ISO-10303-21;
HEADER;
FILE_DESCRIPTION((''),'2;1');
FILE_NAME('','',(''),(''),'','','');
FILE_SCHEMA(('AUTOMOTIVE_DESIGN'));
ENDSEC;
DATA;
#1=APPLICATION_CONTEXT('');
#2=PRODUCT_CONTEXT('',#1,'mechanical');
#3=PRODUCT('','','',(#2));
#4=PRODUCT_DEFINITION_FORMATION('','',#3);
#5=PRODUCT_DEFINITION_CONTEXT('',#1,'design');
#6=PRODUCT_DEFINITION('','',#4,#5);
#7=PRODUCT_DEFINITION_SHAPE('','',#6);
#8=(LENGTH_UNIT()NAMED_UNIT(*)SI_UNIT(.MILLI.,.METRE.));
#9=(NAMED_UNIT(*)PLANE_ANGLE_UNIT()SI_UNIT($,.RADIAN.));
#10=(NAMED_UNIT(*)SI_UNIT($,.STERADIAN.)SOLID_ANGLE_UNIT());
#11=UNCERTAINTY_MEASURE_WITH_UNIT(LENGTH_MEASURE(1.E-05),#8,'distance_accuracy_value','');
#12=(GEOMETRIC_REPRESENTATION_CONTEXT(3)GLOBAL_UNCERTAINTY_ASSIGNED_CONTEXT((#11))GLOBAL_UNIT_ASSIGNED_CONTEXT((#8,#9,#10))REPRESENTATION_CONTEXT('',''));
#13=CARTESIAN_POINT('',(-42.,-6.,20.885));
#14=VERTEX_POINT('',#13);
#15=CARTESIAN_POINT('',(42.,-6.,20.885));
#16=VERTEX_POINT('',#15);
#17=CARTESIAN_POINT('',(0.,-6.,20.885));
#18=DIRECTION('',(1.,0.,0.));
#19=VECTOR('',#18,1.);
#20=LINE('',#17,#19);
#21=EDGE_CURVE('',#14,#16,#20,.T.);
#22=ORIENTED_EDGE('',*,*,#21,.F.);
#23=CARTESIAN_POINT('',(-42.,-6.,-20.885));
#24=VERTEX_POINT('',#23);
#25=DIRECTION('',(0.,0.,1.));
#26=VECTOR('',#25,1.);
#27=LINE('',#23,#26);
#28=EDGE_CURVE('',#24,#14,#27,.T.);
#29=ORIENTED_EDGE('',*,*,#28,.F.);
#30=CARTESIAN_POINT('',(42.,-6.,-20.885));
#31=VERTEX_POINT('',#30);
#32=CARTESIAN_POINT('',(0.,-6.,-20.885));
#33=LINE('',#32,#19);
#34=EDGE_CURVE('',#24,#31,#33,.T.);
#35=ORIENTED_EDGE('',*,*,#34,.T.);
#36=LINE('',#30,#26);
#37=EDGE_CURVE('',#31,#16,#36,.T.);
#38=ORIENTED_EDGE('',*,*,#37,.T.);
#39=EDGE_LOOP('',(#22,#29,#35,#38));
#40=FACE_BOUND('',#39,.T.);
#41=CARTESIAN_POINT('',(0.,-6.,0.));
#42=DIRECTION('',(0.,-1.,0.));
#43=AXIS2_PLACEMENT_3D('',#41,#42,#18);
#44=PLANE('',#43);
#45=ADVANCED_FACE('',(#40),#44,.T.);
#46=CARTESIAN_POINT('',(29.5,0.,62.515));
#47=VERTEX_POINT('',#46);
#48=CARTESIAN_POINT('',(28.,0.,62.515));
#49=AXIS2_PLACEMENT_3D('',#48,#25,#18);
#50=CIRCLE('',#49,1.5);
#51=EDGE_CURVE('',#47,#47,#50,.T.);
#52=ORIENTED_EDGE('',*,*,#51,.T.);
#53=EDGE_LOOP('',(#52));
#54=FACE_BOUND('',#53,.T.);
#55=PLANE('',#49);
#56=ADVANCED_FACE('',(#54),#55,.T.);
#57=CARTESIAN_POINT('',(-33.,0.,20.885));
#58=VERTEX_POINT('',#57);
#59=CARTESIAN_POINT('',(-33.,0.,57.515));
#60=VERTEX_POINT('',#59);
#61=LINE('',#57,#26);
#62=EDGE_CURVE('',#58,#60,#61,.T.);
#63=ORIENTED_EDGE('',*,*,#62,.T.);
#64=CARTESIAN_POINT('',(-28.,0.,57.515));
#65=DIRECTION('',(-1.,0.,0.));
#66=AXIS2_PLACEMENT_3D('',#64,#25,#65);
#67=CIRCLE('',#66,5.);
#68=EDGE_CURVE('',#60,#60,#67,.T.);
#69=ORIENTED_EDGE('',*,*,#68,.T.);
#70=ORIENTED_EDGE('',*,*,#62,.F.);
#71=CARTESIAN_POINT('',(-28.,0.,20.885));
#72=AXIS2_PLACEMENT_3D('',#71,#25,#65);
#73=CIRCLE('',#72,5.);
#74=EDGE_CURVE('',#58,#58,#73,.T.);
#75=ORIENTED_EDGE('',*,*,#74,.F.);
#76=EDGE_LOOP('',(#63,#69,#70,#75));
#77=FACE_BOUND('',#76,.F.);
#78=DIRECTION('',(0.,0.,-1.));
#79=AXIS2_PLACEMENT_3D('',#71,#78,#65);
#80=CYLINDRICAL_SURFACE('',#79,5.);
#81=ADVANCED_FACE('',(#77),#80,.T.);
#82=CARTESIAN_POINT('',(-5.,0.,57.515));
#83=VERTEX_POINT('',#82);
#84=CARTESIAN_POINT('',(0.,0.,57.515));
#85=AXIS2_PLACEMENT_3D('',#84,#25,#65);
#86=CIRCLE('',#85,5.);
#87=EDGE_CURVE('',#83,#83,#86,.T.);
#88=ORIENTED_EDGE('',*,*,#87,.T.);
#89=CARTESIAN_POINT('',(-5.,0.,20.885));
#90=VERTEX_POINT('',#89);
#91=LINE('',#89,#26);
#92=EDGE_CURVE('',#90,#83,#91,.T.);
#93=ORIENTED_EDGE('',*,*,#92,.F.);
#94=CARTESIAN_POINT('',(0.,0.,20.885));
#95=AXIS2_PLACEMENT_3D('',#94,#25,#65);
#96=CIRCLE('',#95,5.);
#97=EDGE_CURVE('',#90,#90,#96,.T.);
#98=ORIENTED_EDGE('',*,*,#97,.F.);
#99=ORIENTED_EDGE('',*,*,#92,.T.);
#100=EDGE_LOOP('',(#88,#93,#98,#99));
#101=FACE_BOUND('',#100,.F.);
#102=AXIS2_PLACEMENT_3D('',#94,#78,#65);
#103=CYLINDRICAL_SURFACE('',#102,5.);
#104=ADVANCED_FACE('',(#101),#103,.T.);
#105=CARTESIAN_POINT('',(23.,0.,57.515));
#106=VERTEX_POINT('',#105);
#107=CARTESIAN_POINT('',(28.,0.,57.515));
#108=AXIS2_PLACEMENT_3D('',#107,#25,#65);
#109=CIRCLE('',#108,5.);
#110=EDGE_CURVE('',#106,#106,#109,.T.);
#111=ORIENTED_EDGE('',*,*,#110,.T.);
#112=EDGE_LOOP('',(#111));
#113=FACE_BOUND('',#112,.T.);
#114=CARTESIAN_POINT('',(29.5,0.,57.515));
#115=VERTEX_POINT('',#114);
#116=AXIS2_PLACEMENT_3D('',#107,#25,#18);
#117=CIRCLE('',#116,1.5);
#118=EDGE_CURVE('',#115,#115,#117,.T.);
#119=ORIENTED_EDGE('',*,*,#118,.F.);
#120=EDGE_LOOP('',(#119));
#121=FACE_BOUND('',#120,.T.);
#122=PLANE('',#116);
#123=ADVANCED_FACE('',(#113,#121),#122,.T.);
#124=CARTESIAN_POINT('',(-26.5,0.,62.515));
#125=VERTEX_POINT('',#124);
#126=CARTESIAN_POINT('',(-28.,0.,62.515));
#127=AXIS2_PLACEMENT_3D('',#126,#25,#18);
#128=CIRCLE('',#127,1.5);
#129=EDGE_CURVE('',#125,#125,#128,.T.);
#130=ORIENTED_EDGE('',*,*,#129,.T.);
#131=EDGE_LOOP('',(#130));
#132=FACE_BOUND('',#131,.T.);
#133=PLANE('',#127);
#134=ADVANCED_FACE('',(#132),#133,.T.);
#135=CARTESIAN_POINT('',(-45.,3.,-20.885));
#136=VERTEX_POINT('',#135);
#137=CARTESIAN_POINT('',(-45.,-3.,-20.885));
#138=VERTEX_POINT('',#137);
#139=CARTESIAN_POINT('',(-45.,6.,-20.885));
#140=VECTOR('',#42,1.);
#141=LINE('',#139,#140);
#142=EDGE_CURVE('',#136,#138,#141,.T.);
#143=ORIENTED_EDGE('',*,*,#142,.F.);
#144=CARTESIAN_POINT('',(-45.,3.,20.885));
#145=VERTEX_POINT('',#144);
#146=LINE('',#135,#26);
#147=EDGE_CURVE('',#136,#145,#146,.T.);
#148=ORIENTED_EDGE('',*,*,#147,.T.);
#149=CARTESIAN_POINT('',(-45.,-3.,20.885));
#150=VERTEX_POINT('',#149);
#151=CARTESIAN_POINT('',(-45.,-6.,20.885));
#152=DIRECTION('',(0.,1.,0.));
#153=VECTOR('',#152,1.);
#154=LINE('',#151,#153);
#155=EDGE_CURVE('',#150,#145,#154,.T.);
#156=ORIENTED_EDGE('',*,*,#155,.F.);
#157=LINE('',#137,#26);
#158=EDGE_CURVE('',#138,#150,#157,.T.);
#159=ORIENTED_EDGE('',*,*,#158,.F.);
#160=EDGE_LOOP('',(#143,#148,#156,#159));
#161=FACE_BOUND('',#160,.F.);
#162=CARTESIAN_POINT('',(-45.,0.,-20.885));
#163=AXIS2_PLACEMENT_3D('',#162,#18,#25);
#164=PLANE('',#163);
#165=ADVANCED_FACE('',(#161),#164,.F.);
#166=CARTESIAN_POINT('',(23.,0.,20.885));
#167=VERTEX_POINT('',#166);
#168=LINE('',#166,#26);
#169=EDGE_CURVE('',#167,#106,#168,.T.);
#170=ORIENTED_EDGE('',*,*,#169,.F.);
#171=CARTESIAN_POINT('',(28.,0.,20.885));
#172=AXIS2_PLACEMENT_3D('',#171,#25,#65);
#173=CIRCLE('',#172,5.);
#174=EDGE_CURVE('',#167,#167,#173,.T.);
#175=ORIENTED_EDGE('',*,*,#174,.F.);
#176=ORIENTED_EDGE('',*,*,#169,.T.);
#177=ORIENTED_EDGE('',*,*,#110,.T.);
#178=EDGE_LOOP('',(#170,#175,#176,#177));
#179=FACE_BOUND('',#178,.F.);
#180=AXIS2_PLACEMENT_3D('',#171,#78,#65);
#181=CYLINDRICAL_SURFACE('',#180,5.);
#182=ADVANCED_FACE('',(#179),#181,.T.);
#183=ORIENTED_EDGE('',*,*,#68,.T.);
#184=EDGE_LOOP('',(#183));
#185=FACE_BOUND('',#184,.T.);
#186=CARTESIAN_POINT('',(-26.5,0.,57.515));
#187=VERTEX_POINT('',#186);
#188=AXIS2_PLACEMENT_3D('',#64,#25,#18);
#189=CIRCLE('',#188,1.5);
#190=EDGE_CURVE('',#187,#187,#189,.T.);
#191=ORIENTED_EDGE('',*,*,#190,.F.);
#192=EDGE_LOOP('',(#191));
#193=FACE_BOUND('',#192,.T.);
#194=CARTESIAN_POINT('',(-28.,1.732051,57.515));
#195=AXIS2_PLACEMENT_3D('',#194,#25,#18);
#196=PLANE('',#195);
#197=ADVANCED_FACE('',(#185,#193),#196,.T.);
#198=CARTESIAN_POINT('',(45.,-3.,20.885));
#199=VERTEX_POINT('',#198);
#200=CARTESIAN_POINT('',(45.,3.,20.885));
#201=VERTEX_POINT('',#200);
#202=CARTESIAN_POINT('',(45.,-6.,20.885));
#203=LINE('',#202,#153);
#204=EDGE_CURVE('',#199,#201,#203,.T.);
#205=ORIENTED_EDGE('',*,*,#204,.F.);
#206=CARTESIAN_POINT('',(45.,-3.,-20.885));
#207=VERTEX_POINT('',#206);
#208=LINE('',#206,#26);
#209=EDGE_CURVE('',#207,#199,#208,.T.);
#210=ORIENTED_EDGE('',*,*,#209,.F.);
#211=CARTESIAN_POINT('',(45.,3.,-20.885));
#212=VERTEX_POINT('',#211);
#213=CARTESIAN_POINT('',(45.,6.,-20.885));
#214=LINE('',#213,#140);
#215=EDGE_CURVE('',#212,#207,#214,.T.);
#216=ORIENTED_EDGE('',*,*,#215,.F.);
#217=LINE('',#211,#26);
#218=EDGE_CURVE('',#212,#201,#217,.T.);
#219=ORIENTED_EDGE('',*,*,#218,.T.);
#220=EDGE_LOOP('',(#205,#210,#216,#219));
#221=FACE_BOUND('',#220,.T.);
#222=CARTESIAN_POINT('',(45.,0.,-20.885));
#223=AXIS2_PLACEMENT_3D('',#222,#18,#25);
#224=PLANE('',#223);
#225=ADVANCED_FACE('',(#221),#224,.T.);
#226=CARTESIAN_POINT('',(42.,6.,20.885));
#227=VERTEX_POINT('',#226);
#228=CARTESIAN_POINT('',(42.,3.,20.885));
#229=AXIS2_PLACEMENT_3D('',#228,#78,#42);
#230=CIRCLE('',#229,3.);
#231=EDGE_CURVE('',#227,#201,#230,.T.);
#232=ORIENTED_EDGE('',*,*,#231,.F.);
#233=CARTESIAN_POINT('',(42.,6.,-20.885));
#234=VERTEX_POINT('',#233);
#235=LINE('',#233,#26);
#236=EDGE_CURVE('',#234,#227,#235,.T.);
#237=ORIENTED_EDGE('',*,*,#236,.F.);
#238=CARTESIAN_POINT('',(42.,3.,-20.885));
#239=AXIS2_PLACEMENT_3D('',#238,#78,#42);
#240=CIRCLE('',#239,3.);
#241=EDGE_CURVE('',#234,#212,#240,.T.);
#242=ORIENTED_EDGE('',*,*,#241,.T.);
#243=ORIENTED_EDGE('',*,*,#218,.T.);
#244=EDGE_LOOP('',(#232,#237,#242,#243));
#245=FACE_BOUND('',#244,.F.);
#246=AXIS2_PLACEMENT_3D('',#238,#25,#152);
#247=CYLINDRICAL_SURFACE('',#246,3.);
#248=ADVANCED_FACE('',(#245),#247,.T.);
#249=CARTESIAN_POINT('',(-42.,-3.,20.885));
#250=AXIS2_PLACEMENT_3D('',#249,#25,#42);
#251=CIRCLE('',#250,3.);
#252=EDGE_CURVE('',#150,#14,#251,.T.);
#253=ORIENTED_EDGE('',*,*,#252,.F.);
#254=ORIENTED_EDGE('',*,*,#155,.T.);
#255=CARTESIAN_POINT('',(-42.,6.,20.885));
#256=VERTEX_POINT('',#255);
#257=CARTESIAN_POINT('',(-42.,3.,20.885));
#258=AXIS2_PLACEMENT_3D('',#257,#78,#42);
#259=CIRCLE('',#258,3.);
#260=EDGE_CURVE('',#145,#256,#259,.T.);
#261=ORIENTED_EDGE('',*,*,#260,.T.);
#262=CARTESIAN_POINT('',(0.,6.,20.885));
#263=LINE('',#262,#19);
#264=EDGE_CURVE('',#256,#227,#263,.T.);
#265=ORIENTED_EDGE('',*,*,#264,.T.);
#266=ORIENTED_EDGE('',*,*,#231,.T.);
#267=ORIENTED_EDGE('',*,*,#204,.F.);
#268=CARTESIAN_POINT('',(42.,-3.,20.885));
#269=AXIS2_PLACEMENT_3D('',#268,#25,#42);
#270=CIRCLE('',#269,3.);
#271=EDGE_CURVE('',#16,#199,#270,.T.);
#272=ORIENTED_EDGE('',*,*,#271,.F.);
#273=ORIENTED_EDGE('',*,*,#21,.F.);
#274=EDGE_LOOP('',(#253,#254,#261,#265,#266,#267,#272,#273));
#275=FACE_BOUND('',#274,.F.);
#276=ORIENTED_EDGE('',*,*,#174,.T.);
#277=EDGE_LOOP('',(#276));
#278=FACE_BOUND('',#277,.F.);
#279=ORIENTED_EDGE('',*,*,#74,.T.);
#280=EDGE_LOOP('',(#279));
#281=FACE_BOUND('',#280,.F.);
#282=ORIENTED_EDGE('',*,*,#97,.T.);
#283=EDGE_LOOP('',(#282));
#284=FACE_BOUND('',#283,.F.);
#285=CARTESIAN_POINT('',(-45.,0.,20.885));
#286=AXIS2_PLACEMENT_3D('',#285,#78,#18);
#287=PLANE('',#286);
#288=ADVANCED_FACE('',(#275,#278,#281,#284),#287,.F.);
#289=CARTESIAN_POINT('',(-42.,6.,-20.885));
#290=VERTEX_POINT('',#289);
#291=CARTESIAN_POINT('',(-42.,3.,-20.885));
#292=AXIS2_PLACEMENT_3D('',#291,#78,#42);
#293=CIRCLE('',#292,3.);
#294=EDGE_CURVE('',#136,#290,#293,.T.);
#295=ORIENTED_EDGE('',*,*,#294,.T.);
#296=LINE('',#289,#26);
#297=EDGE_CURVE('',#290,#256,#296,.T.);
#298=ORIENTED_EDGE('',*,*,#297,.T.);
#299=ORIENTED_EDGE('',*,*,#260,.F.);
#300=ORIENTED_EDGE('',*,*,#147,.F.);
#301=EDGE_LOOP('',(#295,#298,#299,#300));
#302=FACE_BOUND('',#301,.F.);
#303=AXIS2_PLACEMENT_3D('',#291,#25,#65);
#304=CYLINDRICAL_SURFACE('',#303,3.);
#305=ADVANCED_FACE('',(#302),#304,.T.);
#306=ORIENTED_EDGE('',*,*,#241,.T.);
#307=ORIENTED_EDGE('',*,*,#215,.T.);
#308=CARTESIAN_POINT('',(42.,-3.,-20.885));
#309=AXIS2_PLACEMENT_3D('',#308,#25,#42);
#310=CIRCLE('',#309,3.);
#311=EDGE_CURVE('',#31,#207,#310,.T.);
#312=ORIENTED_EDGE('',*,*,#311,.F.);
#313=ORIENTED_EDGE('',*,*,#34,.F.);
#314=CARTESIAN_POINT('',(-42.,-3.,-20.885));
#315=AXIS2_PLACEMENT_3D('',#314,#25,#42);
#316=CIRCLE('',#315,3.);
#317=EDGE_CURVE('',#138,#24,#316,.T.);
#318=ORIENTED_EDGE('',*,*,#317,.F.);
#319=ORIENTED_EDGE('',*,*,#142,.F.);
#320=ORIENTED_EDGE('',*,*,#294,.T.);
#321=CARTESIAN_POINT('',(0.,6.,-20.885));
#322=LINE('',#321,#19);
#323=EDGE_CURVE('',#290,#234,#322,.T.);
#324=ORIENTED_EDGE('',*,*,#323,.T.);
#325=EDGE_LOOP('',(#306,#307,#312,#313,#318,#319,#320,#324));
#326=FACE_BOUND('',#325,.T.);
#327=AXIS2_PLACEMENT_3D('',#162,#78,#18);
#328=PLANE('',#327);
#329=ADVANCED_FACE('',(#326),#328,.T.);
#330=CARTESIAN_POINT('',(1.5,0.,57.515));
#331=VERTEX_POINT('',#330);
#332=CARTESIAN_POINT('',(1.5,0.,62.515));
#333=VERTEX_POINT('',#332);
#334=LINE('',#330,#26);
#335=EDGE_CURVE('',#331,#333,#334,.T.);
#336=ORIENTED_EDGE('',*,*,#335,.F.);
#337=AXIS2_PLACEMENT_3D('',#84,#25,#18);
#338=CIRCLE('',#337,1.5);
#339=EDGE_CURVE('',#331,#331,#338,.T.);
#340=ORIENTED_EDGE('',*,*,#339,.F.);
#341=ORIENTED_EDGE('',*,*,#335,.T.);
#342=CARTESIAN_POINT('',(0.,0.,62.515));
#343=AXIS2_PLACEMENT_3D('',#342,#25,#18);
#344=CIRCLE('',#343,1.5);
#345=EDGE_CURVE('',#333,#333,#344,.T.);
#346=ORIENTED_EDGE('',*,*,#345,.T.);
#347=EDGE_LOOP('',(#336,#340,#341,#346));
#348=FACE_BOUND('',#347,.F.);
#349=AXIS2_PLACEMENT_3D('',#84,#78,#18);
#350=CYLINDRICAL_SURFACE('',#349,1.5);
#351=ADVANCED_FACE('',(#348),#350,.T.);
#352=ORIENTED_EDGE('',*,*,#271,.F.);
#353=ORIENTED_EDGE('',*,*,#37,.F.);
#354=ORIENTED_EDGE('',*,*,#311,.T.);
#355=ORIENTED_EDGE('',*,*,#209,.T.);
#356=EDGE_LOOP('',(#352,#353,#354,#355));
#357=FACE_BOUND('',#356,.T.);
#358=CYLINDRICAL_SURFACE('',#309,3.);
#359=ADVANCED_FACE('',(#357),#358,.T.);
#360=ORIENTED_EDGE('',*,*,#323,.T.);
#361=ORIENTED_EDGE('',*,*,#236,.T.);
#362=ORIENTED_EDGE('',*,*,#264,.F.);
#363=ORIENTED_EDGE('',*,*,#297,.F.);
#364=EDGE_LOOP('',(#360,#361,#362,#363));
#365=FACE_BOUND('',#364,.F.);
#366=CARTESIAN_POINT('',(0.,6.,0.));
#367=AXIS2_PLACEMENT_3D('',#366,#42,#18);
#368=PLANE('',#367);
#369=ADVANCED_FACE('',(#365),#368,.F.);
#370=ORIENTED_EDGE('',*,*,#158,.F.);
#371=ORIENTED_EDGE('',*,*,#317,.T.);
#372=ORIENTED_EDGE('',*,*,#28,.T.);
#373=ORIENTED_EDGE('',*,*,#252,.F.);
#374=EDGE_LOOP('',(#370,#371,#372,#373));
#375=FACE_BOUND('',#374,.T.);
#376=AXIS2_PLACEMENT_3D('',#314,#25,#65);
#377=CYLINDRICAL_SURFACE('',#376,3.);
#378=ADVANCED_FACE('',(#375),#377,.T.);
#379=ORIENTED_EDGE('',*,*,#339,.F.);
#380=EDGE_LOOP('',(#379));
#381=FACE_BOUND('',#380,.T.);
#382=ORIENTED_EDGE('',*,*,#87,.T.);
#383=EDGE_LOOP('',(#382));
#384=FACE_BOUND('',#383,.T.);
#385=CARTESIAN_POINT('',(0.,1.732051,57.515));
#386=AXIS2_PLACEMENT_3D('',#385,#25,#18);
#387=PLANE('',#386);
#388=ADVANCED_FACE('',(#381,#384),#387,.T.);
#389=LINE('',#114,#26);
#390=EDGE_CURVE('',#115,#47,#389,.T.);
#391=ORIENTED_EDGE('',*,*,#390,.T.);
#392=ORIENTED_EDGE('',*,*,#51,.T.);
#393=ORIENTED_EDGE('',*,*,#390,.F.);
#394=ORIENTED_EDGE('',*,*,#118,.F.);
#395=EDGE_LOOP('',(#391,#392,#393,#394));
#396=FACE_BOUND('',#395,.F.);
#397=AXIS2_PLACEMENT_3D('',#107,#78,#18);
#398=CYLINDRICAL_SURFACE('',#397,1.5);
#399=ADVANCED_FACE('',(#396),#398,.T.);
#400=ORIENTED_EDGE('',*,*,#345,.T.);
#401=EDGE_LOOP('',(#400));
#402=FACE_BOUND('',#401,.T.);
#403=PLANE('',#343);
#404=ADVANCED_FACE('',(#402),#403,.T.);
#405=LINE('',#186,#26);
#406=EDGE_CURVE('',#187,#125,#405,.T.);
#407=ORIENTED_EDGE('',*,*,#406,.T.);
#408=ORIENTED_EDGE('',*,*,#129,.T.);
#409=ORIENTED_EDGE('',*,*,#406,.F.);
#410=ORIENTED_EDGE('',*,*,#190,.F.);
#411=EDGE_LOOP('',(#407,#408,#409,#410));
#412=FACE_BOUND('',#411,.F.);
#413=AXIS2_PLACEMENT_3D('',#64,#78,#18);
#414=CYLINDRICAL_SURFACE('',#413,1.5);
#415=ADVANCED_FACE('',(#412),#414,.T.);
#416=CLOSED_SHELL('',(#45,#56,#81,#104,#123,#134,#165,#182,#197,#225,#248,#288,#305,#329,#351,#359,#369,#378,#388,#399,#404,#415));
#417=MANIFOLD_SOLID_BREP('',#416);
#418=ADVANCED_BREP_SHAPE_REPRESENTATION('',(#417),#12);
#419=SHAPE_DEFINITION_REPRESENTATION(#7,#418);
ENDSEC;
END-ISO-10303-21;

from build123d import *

# Parameters (mm, degrees)
F0_W     = 90
F0_H     = 41.77
F1_DEPTH = 6
F3_DEPTH = 36.63
F4_R     = 3
F5_R     = 1.5
F6_DEPTH = 5


with BuildPart() as f1:
    # F0 (on Front) → F1 (new body, symmetric)
    with BuildSketch(Plane.XZ):
        Rectangle(F0_W, F0_H)
    extrude(amount=F1_DEPTH, both=True)

    # F2 (on face) → F3 (join)
    with BuildSketch(Plane.XY.offset(20.885)):
        with BuildLine():
            Line((-28, 0), (-23, 0))
            ThreePointArc((-23, 0), (-28, 5), (-33, 0))
            Line((-33, 0), (-28, 0))
        make_face()
        with BuildLine():
            ThreePointArc((-33, 0), (-28, -5), (-23, 0))
            Line((-23, 0), (-28, 0))
            Line((-28, 0), (-33, 0))
        make_face()
        with BuildLine():
            Line((-5, 0), (0, 0))
            Line((0, 0), (5, 0))
            ThreePointArc((5, 0), (0, 5), (-5, 0))
        make_face()
        with BuildLine():
            Line((5, 0), (0, 0))
            Line((0, 0), (-5, 0))
            ThreePointArc((-5, 0), (0, -5), (5, 0))
        make_face()
        with BuildLine():
            ThreePointArc((33, 0), (28, 5), (23, 0))
            ThreePointArc((23, 0), (28, -5), (33, 0))
        make_face()
    extrude(amount=F3_DEPTH)

    # F4
    f4_edges = [f1.edges().sort_by_distance(p)[0] for p in [
        (45, -6, 0),
        (45, 6, 0),
        (-45, -6, 0),
        (-45, 6, 0),
    ]]
    fillet(f4_edges, radius=F4_R)

    # F5 (on face) → F6 (join)
    with BuildSketch(Plane.XY.offset(57.515)):
        with Locations((-28, 0)):
            Circle(F5_R)
        Circle(F5_R)
        with Locations((28, 0)):
            Circle(F5_R)
    extrude(amount=F6_DEPTH)


solid = f1.part
